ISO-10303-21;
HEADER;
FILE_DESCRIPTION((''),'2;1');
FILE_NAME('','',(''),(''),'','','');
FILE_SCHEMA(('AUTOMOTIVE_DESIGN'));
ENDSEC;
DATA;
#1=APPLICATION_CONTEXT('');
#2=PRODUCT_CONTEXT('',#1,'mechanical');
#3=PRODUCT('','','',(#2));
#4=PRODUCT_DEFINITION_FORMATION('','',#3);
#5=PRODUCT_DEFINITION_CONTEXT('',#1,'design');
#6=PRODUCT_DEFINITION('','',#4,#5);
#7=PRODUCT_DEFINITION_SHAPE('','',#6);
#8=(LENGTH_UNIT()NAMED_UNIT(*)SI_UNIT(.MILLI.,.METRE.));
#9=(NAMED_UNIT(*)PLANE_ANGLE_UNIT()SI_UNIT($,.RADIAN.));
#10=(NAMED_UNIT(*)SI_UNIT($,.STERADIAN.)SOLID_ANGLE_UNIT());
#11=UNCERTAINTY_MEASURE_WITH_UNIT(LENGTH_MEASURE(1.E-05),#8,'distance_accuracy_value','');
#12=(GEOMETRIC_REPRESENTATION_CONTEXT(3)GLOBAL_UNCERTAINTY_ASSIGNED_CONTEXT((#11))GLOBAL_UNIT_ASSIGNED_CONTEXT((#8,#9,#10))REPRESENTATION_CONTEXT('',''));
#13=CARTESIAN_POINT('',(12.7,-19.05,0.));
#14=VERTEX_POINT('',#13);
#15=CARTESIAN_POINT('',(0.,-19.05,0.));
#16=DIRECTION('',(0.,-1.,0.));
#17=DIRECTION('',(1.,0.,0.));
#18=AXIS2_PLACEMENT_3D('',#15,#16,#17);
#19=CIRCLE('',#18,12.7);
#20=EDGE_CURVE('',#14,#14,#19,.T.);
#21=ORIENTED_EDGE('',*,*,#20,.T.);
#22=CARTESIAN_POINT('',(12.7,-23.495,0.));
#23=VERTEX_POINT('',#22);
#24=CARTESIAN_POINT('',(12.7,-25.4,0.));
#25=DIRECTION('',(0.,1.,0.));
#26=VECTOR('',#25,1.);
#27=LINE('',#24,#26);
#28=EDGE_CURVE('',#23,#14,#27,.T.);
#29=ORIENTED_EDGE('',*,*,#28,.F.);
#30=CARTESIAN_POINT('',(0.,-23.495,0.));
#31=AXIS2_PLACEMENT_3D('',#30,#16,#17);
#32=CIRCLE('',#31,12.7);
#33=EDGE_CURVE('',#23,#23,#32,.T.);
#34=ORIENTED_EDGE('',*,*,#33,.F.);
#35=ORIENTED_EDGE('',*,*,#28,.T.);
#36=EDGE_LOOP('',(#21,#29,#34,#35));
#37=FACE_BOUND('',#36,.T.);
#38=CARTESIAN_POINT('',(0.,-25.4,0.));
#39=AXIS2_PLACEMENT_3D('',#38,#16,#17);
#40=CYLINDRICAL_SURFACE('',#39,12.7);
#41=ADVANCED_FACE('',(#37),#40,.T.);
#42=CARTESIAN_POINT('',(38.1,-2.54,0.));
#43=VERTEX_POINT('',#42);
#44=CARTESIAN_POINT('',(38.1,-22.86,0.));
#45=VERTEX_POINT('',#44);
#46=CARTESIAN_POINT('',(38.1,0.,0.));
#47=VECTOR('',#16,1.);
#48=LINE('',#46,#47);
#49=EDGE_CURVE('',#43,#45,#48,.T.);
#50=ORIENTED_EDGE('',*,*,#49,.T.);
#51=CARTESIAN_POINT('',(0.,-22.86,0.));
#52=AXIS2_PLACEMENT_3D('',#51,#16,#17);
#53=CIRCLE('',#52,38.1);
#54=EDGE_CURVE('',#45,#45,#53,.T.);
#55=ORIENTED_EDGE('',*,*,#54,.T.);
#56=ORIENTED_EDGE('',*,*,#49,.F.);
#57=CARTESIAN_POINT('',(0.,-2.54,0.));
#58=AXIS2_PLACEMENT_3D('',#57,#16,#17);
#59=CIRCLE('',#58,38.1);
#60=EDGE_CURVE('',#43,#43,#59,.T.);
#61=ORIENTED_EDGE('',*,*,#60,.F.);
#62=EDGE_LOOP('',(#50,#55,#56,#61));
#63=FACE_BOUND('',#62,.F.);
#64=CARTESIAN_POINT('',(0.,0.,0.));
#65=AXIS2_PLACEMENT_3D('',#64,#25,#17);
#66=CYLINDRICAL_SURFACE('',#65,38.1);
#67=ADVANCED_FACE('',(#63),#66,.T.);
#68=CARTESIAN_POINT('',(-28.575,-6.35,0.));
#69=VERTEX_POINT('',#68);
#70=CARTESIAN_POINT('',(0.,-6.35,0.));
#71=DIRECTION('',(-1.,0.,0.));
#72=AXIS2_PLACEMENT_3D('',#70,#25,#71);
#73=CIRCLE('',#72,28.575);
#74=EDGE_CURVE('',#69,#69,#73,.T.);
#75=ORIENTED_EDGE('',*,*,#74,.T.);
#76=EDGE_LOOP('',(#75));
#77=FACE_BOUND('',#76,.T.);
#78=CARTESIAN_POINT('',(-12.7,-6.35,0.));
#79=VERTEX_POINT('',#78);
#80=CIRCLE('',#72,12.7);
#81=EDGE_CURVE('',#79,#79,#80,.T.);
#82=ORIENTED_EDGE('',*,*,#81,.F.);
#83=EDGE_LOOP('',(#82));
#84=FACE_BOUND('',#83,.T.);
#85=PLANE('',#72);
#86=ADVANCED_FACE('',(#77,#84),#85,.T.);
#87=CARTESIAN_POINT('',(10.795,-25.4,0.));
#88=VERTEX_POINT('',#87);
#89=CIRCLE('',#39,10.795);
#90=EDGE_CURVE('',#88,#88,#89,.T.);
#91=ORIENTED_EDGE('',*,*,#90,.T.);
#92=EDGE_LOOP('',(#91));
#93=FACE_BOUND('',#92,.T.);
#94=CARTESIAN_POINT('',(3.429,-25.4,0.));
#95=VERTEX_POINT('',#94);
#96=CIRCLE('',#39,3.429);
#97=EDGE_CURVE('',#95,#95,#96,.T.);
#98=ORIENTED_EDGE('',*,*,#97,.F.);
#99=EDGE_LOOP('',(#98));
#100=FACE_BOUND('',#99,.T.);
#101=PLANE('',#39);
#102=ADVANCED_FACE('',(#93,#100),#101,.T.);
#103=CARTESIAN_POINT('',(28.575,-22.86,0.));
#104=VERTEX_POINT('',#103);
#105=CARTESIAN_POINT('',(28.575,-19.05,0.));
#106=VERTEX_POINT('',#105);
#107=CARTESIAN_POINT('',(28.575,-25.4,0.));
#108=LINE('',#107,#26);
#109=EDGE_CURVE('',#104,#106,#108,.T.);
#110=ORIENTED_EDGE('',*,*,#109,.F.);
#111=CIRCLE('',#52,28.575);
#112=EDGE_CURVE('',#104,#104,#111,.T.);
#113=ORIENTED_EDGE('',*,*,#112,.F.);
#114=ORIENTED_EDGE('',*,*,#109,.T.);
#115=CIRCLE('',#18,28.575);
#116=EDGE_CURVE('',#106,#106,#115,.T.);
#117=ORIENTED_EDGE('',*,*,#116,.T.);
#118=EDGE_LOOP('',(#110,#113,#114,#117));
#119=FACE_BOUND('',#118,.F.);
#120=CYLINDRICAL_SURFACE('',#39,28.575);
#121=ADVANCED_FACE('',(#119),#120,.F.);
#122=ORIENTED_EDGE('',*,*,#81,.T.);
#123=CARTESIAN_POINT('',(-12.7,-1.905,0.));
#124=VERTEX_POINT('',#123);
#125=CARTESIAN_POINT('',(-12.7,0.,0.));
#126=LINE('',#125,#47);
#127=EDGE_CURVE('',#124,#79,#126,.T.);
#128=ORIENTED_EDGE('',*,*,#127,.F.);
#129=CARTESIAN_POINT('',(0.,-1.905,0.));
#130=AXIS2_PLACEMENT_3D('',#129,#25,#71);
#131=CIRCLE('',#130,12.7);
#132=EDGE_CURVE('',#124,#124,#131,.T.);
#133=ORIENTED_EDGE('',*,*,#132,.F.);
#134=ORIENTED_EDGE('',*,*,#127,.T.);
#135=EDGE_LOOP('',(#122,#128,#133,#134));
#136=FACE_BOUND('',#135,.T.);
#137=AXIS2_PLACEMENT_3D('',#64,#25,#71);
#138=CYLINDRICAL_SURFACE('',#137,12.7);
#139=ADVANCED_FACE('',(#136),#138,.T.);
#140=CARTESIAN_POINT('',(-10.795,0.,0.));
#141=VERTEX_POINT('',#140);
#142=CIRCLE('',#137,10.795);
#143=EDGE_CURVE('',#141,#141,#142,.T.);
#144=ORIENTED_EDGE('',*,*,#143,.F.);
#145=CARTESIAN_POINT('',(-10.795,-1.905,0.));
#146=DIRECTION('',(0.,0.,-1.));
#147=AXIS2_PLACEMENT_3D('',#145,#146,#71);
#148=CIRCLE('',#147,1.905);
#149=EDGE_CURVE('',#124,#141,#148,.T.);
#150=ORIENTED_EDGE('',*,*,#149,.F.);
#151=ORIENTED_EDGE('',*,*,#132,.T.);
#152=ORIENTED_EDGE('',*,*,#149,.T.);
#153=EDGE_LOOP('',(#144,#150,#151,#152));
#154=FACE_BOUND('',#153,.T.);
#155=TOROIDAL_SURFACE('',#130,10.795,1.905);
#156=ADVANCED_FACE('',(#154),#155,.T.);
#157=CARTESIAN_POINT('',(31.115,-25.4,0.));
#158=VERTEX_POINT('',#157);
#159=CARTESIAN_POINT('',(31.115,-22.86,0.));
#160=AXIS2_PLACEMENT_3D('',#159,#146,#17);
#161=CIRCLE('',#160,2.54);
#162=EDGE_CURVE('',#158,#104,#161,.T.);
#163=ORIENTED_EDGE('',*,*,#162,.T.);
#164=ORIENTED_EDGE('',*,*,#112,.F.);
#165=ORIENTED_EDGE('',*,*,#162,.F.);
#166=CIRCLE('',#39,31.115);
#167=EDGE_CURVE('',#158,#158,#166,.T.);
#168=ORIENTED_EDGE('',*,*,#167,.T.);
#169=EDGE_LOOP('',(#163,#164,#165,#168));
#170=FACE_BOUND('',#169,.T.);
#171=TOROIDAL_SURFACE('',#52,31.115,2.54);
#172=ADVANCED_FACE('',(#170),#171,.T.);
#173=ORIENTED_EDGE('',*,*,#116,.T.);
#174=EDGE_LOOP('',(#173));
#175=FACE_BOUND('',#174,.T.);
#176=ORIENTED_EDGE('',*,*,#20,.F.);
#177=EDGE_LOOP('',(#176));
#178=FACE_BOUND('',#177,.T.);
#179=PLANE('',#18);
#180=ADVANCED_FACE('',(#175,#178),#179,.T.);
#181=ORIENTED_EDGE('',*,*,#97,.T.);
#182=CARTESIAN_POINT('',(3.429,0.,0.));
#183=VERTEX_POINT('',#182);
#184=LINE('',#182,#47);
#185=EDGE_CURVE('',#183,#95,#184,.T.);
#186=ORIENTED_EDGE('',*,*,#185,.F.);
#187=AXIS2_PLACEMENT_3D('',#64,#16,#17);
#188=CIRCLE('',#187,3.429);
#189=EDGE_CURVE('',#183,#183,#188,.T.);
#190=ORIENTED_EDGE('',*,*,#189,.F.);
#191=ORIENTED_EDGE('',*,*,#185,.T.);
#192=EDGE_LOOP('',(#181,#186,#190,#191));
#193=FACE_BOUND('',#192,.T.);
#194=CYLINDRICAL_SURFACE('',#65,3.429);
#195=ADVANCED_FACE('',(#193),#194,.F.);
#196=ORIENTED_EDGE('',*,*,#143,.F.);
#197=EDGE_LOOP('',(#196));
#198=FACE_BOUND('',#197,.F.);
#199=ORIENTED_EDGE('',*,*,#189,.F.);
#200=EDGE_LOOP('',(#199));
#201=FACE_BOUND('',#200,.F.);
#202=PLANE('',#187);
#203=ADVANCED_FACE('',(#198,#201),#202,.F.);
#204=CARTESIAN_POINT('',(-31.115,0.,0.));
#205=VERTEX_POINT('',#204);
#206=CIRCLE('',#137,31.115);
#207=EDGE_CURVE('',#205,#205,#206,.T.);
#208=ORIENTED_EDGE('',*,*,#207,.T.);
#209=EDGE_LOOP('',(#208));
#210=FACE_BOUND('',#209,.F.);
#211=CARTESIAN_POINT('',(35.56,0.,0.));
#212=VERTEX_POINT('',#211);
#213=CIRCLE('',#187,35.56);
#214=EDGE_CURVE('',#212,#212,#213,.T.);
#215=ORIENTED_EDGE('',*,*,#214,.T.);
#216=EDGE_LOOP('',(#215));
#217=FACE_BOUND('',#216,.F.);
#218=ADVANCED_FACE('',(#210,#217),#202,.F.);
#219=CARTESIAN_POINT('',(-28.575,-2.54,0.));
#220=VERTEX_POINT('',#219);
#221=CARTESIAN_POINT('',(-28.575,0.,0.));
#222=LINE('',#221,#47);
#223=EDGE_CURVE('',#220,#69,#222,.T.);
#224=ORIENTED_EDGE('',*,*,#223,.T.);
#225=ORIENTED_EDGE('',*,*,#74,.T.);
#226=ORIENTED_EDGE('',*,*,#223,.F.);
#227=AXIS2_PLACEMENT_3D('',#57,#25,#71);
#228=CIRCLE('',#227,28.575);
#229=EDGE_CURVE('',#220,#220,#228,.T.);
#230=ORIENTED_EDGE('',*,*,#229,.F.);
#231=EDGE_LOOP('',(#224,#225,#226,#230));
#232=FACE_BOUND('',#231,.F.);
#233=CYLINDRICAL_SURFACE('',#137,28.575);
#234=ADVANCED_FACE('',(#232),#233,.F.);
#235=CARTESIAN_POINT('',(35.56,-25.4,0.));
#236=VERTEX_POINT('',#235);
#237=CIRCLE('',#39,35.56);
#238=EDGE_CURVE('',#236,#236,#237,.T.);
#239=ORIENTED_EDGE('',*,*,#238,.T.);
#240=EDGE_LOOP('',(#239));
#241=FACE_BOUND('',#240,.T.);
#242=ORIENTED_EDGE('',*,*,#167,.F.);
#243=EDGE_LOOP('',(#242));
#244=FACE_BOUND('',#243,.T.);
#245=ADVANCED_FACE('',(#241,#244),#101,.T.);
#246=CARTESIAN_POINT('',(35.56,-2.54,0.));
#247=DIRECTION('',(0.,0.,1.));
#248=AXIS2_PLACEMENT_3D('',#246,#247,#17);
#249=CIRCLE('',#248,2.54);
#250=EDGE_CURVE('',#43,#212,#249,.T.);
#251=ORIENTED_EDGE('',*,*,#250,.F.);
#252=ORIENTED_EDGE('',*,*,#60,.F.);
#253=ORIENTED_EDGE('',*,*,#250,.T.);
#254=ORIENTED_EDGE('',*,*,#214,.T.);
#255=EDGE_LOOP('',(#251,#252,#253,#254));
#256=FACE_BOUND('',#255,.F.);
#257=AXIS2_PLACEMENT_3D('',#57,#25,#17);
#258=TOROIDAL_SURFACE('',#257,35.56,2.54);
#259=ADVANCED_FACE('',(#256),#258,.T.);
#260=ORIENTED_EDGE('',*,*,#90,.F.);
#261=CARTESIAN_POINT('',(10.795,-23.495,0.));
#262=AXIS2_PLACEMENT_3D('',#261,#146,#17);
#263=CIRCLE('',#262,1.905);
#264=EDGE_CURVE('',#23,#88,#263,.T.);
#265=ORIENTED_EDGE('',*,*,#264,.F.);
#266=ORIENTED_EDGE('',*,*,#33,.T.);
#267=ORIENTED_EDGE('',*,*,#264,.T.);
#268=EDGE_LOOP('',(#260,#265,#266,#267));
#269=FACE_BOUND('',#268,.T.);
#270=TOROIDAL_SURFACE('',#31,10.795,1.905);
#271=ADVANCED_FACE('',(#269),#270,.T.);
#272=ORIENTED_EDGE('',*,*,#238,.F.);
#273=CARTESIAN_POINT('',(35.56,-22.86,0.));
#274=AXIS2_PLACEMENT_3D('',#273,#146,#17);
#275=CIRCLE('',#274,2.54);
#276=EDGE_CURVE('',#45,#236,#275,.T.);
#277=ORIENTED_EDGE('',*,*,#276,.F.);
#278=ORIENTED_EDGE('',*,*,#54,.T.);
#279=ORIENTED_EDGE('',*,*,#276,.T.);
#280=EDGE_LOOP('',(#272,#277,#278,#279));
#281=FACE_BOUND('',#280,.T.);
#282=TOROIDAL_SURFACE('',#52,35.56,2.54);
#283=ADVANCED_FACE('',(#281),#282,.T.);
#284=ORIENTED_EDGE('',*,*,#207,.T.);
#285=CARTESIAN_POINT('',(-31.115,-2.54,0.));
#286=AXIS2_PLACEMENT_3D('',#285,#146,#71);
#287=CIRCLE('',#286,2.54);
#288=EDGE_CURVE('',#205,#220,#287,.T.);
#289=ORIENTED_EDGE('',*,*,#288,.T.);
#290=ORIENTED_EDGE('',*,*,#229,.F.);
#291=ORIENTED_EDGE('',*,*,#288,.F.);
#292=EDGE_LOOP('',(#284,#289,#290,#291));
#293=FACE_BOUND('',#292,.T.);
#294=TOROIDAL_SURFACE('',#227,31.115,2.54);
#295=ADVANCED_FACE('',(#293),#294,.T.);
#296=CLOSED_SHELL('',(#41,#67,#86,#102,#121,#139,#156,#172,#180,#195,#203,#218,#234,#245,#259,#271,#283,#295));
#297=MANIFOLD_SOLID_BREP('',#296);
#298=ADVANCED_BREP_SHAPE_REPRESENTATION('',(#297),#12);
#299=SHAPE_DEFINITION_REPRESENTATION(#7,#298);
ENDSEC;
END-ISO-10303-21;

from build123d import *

# Parameters (mm, degrees)
F0_R     = 38.1
F0_R_2   = 3.429
F1_DEPTH = 25.4
F2_R     = 28.575
F2_R_2   = 12.7
F3_DEPTH = 6.35
F4_R     = 28.575
F4_R_2   = 12.7
F5_DEPTH = 6.35
F6_R     = 2.54
F7_R     = 1.905


with BuildPart() as f1:
    # F0 (on Front) → F1 (new body)
    with BuildSketch(Plane.XZ):
        Circle(F0_R)
        Circle(F0_R_2, mode=Mode.SUBTRACT)
    extrude(amount=F1_DEPTH)

    # F2 (on face) → F3 (cut)
    with BuildSketch(Plane.XZ.offset(25.4)):
        Circle(F2_R)
        Circle(F2_R_2, mode=Mode.SUBTRACT)
    extrude(amount=-F3_DEPTH, mode=Mode.SUBTRACT)

    # F4 (on face) → F5 (cut)
    with BuildSketch(Plane(origin=(0, 0, 0), x_dir=(-1, 0, 0), z_dir=(0, 1, 0))):
        Circle(F4_R)
        Circle(F4_R_2, mode=Mode.SUBTRACT)
    extrude(amount=-F5_DEPTH, mode=Mode.SUBTRACT)

    # F6
    f6_edges = [f1.edges().sort_by_distance(p)[0] for p in [
        (28.575, 0, 0),
        (-38.1, 0, 0),
        (-38.1, -25.4, 0),
        (-28.575, -25.4, 0),
    ]]
    fillet(f6_edges, radius=F6_R)

    # F7
    f7_edges = [f1.edges().sort_by_distance(p)[0] for p in [
        (-12.7, -25.4, 0),
        (12.7, 0, 0),
    ]]
    fillet(f7_edges, radius=F7_R)


solid = f1.part
